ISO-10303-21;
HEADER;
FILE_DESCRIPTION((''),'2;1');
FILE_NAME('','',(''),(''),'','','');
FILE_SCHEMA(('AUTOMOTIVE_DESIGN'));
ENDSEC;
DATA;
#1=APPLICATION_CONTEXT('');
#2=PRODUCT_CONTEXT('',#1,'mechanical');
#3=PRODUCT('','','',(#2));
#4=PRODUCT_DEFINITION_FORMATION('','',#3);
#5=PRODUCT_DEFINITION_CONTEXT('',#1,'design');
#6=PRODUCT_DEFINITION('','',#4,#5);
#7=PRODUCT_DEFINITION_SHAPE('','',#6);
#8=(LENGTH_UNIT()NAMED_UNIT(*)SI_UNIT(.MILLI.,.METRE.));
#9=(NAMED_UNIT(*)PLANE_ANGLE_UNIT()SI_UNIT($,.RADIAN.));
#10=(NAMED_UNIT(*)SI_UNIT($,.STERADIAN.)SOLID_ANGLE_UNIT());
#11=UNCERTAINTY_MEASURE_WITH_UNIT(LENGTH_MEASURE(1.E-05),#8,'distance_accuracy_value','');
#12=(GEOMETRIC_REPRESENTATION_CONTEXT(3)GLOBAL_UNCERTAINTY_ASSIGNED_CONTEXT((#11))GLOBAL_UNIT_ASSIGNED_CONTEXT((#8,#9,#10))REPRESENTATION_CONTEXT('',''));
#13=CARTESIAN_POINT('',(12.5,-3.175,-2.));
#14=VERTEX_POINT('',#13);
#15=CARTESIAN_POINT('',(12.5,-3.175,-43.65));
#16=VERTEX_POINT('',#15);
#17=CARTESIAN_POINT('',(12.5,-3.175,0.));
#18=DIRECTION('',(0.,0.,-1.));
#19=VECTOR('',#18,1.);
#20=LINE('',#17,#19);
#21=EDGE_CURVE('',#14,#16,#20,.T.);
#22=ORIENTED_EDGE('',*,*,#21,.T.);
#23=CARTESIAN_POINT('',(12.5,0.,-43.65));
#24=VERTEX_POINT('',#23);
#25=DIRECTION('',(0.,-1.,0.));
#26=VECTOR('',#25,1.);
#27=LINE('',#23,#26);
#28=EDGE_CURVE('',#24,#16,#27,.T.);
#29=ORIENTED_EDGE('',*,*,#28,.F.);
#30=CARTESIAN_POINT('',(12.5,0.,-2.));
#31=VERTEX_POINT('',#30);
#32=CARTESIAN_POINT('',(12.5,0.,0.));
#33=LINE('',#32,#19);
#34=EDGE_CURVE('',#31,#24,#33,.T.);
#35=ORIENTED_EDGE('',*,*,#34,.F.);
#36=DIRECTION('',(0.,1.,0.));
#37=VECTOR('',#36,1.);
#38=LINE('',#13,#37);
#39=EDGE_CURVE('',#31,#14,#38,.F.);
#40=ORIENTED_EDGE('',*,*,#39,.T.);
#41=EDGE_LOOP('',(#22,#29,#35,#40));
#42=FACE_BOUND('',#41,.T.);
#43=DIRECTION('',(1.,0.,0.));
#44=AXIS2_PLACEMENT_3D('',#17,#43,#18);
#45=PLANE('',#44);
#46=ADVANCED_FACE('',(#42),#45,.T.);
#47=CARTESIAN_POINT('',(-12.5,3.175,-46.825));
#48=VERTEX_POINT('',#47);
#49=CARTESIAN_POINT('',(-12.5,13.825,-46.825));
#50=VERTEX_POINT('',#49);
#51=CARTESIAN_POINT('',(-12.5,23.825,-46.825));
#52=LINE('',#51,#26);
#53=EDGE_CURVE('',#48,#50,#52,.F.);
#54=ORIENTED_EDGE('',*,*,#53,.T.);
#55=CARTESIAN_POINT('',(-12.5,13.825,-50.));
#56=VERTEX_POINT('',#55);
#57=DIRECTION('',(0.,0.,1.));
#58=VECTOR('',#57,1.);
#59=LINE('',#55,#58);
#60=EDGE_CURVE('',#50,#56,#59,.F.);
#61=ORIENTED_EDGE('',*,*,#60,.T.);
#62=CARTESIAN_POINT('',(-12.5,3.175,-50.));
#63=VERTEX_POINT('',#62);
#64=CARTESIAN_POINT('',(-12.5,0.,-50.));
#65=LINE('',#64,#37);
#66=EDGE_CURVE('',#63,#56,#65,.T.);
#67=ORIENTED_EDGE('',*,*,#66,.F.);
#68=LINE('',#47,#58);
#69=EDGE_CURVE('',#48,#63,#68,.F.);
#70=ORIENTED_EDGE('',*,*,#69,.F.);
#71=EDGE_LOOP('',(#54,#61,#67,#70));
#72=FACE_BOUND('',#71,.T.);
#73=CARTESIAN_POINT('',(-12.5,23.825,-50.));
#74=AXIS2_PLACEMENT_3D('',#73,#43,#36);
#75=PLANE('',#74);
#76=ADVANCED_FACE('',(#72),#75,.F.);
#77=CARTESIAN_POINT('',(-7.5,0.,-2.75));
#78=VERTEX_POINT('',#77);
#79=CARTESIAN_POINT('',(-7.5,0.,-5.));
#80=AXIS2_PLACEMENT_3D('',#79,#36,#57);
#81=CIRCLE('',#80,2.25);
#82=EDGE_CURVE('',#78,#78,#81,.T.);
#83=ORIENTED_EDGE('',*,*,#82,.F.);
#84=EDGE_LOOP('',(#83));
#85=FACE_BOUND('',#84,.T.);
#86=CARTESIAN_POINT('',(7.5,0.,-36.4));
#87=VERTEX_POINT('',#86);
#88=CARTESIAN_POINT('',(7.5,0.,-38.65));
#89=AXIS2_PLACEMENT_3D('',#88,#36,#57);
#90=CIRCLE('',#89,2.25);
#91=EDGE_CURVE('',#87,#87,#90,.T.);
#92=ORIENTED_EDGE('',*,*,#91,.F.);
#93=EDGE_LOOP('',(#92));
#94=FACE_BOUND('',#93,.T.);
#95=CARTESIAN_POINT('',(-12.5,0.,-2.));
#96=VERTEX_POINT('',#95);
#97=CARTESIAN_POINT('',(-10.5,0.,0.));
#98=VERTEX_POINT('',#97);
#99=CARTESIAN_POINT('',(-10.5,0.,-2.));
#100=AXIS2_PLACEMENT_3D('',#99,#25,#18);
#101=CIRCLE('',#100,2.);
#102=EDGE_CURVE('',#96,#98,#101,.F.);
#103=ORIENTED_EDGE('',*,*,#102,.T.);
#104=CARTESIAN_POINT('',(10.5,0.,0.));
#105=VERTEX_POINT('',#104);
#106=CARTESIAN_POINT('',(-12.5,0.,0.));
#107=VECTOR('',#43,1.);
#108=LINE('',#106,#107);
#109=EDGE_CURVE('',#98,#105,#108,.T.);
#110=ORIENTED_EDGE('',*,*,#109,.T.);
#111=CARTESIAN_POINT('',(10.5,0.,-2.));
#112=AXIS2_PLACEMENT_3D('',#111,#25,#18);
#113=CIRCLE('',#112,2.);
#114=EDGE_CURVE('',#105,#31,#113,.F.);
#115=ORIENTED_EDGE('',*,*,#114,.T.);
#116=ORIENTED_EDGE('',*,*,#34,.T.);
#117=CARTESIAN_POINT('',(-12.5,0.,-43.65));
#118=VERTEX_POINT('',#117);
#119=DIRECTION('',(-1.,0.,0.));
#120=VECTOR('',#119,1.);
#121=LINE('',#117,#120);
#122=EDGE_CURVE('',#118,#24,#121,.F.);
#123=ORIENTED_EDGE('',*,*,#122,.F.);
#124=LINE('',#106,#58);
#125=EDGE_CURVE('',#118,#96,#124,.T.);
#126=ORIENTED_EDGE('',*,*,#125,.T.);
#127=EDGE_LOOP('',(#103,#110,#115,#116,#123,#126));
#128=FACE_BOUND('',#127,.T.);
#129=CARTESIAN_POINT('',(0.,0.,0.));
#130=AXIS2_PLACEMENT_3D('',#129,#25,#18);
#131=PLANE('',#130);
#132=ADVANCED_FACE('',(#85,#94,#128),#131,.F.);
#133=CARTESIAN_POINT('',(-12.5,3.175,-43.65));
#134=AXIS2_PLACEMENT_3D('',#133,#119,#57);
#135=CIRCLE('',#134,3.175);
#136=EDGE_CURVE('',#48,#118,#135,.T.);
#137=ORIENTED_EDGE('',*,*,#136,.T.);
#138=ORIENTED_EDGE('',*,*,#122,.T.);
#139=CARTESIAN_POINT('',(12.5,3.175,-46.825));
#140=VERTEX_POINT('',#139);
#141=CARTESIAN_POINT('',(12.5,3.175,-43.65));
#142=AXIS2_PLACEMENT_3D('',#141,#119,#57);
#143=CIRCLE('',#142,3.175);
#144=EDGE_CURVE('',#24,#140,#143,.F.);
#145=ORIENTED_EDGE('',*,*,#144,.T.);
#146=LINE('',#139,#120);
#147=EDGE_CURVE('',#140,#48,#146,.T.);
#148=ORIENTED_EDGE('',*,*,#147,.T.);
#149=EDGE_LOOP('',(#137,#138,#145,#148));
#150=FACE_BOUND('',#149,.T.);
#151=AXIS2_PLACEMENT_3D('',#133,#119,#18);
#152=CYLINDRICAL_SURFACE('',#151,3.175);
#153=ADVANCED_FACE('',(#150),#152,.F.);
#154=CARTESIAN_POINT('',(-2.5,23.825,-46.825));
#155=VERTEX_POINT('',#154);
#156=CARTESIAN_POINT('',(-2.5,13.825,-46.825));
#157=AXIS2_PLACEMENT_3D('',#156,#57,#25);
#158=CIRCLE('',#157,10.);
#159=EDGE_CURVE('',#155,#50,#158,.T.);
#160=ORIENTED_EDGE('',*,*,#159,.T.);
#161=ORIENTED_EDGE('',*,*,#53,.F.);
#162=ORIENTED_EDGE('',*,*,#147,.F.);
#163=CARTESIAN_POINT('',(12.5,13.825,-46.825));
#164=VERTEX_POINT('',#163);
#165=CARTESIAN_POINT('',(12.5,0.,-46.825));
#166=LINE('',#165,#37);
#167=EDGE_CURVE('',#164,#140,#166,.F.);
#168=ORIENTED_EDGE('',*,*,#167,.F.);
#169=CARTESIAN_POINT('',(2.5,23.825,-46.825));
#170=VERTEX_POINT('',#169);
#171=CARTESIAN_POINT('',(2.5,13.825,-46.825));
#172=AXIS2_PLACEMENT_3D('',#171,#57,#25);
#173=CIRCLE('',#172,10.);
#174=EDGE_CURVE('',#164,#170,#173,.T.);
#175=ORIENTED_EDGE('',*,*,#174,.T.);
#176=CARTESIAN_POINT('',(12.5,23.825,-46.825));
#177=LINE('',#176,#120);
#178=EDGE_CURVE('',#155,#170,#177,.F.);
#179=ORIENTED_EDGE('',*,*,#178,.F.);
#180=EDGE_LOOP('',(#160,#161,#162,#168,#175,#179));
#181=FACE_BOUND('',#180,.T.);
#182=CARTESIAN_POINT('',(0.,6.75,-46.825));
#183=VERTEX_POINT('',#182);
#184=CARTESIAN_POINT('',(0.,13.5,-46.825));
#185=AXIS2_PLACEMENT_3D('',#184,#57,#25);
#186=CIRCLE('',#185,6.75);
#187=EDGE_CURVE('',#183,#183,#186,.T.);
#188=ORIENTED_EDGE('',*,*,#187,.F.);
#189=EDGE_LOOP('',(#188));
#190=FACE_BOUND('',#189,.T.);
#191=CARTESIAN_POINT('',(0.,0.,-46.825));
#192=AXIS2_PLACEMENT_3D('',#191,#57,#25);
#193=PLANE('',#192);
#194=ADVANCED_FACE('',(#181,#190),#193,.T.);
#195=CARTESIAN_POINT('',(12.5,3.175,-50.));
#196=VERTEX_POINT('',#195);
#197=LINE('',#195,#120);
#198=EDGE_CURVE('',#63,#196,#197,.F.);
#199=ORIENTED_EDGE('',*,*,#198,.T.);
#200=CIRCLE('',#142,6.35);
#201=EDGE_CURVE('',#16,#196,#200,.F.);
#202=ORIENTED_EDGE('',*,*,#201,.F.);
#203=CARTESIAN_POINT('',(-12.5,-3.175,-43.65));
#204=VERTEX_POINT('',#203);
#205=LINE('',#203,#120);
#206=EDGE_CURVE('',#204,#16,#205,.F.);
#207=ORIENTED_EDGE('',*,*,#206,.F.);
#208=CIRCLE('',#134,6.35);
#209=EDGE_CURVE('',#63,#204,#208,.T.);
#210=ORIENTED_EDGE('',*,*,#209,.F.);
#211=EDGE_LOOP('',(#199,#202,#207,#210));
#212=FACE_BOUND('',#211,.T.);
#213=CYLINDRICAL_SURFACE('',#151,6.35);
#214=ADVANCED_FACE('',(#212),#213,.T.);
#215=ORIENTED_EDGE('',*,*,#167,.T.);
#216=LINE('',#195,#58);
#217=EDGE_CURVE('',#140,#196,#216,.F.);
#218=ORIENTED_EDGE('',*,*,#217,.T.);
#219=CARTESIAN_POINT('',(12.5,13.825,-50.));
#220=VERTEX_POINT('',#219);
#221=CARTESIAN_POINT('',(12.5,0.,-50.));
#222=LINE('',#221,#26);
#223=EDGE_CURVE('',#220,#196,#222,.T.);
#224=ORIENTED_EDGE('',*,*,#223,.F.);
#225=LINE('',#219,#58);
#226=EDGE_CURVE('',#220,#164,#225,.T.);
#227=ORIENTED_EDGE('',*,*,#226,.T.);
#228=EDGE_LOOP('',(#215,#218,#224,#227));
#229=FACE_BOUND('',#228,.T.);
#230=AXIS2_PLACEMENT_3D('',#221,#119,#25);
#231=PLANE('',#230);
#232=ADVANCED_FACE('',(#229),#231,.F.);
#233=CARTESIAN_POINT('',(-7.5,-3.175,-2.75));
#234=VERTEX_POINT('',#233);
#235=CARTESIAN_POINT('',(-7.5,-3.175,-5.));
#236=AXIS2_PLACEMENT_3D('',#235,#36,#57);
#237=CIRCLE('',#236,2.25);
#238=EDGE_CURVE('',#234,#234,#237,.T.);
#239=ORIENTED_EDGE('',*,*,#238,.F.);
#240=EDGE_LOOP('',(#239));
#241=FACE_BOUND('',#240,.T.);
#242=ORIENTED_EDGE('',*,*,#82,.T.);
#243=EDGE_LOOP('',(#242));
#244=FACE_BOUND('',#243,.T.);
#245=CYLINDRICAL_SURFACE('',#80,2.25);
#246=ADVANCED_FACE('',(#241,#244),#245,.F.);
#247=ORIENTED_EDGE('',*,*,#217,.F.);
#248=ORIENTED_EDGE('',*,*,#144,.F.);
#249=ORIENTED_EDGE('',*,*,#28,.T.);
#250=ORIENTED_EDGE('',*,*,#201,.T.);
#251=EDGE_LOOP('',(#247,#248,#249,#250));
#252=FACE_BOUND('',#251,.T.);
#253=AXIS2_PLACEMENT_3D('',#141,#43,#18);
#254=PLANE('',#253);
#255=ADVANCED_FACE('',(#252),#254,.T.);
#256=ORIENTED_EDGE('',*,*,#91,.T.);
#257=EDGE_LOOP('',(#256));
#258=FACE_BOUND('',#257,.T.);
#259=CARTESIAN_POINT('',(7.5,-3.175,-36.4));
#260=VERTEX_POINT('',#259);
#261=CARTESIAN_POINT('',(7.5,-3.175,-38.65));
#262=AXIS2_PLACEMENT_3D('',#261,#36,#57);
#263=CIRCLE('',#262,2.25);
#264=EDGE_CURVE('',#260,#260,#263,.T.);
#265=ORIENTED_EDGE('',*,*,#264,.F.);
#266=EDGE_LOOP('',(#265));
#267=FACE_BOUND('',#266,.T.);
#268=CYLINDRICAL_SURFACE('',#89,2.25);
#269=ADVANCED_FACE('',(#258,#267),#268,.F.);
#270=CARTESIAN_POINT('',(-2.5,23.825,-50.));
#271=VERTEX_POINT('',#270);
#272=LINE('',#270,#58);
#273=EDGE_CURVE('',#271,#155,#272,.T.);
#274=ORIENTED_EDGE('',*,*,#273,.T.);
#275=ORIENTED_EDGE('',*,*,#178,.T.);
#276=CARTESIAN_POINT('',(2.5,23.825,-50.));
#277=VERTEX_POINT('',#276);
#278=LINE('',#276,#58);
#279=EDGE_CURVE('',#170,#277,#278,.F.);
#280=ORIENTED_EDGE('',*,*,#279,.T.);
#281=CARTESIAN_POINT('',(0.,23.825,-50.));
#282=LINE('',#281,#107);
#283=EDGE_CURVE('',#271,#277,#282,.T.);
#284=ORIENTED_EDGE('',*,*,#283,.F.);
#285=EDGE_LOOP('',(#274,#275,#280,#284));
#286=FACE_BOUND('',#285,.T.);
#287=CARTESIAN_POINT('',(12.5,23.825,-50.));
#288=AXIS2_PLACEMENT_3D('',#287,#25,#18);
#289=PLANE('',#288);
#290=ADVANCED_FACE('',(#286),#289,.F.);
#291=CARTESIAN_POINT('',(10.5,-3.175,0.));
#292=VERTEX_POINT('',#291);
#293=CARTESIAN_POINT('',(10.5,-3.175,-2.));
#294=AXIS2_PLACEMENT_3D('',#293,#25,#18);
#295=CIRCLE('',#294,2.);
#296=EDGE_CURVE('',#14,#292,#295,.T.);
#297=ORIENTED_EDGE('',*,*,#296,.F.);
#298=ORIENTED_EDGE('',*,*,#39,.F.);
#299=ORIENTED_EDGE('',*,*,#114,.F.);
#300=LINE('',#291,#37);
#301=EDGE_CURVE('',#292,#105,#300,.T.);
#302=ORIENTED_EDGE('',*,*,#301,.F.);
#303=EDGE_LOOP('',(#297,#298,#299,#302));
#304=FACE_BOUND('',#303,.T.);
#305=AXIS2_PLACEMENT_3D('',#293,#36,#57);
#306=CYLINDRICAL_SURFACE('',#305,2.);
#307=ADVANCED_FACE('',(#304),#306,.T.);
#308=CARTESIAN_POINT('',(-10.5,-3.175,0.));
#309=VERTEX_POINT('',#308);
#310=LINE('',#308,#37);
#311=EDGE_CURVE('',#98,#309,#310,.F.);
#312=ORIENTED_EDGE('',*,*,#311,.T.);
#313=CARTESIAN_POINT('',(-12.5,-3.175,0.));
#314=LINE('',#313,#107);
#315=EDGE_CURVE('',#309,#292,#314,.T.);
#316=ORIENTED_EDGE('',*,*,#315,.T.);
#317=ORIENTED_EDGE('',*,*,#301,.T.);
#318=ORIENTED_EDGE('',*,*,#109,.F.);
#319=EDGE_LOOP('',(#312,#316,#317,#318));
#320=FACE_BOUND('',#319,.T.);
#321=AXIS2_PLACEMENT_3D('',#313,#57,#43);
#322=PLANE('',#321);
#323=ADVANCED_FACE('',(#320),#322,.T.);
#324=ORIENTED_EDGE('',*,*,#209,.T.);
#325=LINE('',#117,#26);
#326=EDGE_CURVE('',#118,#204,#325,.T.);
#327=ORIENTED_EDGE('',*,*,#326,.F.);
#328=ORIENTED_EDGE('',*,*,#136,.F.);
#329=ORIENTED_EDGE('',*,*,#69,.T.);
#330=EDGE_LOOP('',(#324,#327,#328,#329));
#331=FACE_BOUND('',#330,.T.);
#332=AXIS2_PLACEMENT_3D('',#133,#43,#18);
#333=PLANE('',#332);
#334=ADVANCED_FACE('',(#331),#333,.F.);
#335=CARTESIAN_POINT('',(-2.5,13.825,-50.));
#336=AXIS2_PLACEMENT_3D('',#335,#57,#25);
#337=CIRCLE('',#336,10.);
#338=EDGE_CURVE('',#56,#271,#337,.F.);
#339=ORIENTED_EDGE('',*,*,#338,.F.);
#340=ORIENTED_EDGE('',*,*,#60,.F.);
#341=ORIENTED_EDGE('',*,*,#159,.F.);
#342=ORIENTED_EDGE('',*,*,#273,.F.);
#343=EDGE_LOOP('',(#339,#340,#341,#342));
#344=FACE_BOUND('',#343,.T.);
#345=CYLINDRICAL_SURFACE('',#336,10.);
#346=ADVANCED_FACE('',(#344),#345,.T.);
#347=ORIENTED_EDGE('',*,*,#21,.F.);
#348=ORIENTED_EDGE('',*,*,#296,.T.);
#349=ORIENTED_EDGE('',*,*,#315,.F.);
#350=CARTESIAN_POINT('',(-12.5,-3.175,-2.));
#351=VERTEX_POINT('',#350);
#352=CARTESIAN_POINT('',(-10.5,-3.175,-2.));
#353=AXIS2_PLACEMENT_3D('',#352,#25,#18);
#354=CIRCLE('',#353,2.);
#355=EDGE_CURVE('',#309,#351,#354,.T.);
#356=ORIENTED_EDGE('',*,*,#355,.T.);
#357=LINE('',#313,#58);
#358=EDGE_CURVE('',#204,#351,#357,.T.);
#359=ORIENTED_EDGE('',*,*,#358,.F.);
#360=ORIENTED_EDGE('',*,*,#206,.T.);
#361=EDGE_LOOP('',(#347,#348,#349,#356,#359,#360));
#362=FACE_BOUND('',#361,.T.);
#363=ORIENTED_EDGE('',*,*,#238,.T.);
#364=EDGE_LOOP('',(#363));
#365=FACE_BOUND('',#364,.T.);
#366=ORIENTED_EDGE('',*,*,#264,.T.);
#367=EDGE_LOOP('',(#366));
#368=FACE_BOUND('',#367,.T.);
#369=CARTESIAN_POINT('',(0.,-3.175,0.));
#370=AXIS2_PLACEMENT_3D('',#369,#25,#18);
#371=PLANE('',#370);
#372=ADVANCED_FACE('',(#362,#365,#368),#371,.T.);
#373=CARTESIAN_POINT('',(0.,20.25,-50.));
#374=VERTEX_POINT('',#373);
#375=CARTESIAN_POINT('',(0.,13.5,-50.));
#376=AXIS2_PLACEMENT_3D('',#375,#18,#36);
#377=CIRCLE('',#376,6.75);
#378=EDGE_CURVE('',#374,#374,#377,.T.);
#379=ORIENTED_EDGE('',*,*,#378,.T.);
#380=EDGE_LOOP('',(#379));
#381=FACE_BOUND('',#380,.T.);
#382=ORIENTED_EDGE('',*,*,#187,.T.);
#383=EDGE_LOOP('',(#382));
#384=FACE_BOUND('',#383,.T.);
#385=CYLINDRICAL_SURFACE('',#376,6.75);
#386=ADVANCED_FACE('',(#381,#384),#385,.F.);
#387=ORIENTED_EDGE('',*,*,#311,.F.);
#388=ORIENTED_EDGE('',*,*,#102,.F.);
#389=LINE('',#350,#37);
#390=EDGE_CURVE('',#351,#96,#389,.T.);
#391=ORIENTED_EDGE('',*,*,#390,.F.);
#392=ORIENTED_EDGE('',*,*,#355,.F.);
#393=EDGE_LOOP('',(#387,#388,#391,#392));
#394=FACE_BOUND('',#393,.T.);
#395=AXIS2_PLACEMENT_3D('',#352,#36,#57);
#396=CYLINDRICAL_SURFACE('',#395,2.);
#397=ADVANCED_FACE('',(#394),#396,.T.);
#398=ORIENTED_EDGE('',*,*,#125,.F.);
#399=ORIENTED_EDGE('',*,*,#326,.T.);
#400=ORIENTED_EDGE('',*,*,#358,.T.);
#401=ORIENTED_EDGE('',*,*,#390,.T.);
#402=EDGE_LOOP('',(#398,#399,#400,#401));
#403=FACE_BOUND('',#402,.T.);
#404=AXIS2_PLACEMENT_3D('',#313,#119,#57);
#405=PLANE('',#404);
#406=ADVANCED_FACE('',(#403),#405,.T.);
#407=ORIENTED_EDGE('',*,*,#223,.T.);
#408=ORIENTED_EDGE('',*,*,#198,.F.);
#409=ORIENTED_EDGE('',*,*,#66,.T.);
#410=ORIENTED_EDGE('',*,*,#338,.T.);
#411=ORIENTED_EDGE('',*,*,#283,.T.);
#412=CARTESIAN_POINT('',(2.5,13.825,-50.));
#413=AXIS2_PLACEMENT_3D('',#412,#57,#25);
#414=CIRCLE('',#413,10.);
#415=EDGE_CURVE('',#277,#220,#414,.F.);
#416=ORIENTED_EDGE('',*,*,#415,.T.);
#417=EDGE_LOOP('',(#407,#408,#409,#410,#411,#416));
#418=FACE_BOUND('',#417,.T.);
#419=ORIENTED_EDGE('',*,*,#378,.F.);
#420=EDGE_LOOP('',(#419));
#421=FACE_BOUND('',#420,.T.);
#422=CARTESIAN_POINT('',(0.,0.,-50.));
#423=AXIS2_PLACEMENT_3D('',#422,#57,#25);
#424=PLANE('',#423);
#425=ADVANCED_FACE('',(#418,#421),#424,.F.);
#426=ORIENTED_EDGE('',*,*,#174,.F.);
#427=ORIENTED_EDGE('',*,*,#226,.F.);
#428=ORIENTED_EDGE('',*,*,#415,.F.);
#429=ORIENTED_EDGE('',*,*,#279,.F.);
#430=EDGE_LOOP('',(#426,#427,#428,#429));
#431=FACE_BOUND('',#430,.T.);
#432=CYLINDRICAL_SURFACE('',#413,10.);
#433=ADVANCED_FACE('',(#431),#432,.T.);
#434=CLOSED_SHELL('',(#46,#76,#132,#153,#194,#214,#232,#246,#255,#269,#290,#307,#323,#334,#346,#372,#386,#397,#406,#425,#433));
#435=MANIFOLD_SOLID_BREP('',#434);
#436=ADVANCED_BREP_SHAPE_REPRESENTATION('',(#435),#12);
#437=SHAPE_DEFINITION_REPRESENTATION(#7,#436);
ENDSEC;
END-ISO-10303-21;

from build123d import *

# Parameters (mm, degrees)
SKETCH1_W                    = 25
SKETCH1_H                    = 50
BASE_FLANGE1_DEPTH           = 3.175
EDGE_FLANGE1_STRIP_W         = 19.05
EDGE_FLANGE1_STRIP_H         = 3.175
EDGE_FLANGE1_STRIP_CUT_DEPTH = 25
EDGE_FLANGE1_DEPTH           = 25
M12_CLEARANCE_HOLE1_D        = 13.5
M4_CLEARANCE_HOLE1_D         = 4.5
FILLET1_R                    = 10
FILLET2_R                    = 2


# Sheet-metal steps are written as plain solids
with BuildPart() as part:
    # Sketch1 → Base-Flange1 (new body)
    with BuildSketch(Plane(origin=(0, 0, 0), x_dir=(1, 0, 0), z_dir=(0, 1, 0))):
        with Locations((0, 25)):
            Rectangle(SKETCH1_W, SKETCH1_H)
    extrude(amount=-BASE_FLANGE1_DEPTH)

    # Edge-Flange1 strip (across the edge) → Edge-Flange1 strip cut (cut)
    with BuildSketch(Plane(origin=(12.5, 0, -50), x_dir=(0, 0, 1), z_dir=(-1, 0, 0))):
        with Locations((-3.175, -1.5875)):
            Rectangle(EDGE_FLANGE1_STRIP_W, EDGE_FLANGE1_STRIP_H)
    extrude(amount=EDGE_FLANGE1_STRIP_CUT_DEPTH, mode=Mode.SUBTRACT)

    # Edge-Flange1 section (across the edge) → Edge-Flange1 (add)
    with BuildSketch(Plane(origin=(12.5, 0, -50), x_dir=(0, 0, 1), z_dir=(-1, 0, 0))):
        with BuildLine():
            Line((0, 3.175), (0, 23.825))
            Line((0, 23.825), (3.175, 23.825))
            Line((3.175, 23.825), (3.175, 3.175))
            ThreePointArc((3.175, 3.175), (4.10493597, 0.92993597), (6.35, 0))
            Line((6.35, 0), (6.35, -3.175))
            ThreePointArc((6.35, -3.175), (1.859871939, -1.315128061), (0, 3.175))
        make_face()
    extrude(amount=EDGE_FLANGE1_DEPTH)

    # M12 Clearance Hole1 (through all)
    with Locations(Plane(origin=(0, 0, -50), x_dir=(-1, 0, 0), z_dir=(0, 0, -1))):
        with Locations((0, 13.5)):
            Hole(M12_CLEARANCE_HOLE1_D / 2)

    # M4 Clearance Hole1 (through all)
    with Locations(Plane(origin=(0, 0, 0), x_dir=(1, 0, 0), z_dir=(0, 1, 0))):
        with Locations((-7.5, 5), (7.5, 38.65)):
            Hole(M4_CLEARANCE_HOLE1_D / 2)

    # Fillet1
    fillet1_edges = [part.edges().sort_by_distance(p)[0] for p in [
        (12.5, 23.825, -48.4125),
        (-12.5, 23.825, -48.4125),
    ]]
    fillet(fillet1_edges, radius=FILLET1_R)

    # Fillet2
    fillet2_edges = [part.edges().sort_by_distance(p)[0] for p in [
        (12.5, -1.5875, 0),
        (-12.5, -1.5875, 0),
    ]]
    fillet(fillet2_edges, radius=FILLET2_R)


solid = part.part
